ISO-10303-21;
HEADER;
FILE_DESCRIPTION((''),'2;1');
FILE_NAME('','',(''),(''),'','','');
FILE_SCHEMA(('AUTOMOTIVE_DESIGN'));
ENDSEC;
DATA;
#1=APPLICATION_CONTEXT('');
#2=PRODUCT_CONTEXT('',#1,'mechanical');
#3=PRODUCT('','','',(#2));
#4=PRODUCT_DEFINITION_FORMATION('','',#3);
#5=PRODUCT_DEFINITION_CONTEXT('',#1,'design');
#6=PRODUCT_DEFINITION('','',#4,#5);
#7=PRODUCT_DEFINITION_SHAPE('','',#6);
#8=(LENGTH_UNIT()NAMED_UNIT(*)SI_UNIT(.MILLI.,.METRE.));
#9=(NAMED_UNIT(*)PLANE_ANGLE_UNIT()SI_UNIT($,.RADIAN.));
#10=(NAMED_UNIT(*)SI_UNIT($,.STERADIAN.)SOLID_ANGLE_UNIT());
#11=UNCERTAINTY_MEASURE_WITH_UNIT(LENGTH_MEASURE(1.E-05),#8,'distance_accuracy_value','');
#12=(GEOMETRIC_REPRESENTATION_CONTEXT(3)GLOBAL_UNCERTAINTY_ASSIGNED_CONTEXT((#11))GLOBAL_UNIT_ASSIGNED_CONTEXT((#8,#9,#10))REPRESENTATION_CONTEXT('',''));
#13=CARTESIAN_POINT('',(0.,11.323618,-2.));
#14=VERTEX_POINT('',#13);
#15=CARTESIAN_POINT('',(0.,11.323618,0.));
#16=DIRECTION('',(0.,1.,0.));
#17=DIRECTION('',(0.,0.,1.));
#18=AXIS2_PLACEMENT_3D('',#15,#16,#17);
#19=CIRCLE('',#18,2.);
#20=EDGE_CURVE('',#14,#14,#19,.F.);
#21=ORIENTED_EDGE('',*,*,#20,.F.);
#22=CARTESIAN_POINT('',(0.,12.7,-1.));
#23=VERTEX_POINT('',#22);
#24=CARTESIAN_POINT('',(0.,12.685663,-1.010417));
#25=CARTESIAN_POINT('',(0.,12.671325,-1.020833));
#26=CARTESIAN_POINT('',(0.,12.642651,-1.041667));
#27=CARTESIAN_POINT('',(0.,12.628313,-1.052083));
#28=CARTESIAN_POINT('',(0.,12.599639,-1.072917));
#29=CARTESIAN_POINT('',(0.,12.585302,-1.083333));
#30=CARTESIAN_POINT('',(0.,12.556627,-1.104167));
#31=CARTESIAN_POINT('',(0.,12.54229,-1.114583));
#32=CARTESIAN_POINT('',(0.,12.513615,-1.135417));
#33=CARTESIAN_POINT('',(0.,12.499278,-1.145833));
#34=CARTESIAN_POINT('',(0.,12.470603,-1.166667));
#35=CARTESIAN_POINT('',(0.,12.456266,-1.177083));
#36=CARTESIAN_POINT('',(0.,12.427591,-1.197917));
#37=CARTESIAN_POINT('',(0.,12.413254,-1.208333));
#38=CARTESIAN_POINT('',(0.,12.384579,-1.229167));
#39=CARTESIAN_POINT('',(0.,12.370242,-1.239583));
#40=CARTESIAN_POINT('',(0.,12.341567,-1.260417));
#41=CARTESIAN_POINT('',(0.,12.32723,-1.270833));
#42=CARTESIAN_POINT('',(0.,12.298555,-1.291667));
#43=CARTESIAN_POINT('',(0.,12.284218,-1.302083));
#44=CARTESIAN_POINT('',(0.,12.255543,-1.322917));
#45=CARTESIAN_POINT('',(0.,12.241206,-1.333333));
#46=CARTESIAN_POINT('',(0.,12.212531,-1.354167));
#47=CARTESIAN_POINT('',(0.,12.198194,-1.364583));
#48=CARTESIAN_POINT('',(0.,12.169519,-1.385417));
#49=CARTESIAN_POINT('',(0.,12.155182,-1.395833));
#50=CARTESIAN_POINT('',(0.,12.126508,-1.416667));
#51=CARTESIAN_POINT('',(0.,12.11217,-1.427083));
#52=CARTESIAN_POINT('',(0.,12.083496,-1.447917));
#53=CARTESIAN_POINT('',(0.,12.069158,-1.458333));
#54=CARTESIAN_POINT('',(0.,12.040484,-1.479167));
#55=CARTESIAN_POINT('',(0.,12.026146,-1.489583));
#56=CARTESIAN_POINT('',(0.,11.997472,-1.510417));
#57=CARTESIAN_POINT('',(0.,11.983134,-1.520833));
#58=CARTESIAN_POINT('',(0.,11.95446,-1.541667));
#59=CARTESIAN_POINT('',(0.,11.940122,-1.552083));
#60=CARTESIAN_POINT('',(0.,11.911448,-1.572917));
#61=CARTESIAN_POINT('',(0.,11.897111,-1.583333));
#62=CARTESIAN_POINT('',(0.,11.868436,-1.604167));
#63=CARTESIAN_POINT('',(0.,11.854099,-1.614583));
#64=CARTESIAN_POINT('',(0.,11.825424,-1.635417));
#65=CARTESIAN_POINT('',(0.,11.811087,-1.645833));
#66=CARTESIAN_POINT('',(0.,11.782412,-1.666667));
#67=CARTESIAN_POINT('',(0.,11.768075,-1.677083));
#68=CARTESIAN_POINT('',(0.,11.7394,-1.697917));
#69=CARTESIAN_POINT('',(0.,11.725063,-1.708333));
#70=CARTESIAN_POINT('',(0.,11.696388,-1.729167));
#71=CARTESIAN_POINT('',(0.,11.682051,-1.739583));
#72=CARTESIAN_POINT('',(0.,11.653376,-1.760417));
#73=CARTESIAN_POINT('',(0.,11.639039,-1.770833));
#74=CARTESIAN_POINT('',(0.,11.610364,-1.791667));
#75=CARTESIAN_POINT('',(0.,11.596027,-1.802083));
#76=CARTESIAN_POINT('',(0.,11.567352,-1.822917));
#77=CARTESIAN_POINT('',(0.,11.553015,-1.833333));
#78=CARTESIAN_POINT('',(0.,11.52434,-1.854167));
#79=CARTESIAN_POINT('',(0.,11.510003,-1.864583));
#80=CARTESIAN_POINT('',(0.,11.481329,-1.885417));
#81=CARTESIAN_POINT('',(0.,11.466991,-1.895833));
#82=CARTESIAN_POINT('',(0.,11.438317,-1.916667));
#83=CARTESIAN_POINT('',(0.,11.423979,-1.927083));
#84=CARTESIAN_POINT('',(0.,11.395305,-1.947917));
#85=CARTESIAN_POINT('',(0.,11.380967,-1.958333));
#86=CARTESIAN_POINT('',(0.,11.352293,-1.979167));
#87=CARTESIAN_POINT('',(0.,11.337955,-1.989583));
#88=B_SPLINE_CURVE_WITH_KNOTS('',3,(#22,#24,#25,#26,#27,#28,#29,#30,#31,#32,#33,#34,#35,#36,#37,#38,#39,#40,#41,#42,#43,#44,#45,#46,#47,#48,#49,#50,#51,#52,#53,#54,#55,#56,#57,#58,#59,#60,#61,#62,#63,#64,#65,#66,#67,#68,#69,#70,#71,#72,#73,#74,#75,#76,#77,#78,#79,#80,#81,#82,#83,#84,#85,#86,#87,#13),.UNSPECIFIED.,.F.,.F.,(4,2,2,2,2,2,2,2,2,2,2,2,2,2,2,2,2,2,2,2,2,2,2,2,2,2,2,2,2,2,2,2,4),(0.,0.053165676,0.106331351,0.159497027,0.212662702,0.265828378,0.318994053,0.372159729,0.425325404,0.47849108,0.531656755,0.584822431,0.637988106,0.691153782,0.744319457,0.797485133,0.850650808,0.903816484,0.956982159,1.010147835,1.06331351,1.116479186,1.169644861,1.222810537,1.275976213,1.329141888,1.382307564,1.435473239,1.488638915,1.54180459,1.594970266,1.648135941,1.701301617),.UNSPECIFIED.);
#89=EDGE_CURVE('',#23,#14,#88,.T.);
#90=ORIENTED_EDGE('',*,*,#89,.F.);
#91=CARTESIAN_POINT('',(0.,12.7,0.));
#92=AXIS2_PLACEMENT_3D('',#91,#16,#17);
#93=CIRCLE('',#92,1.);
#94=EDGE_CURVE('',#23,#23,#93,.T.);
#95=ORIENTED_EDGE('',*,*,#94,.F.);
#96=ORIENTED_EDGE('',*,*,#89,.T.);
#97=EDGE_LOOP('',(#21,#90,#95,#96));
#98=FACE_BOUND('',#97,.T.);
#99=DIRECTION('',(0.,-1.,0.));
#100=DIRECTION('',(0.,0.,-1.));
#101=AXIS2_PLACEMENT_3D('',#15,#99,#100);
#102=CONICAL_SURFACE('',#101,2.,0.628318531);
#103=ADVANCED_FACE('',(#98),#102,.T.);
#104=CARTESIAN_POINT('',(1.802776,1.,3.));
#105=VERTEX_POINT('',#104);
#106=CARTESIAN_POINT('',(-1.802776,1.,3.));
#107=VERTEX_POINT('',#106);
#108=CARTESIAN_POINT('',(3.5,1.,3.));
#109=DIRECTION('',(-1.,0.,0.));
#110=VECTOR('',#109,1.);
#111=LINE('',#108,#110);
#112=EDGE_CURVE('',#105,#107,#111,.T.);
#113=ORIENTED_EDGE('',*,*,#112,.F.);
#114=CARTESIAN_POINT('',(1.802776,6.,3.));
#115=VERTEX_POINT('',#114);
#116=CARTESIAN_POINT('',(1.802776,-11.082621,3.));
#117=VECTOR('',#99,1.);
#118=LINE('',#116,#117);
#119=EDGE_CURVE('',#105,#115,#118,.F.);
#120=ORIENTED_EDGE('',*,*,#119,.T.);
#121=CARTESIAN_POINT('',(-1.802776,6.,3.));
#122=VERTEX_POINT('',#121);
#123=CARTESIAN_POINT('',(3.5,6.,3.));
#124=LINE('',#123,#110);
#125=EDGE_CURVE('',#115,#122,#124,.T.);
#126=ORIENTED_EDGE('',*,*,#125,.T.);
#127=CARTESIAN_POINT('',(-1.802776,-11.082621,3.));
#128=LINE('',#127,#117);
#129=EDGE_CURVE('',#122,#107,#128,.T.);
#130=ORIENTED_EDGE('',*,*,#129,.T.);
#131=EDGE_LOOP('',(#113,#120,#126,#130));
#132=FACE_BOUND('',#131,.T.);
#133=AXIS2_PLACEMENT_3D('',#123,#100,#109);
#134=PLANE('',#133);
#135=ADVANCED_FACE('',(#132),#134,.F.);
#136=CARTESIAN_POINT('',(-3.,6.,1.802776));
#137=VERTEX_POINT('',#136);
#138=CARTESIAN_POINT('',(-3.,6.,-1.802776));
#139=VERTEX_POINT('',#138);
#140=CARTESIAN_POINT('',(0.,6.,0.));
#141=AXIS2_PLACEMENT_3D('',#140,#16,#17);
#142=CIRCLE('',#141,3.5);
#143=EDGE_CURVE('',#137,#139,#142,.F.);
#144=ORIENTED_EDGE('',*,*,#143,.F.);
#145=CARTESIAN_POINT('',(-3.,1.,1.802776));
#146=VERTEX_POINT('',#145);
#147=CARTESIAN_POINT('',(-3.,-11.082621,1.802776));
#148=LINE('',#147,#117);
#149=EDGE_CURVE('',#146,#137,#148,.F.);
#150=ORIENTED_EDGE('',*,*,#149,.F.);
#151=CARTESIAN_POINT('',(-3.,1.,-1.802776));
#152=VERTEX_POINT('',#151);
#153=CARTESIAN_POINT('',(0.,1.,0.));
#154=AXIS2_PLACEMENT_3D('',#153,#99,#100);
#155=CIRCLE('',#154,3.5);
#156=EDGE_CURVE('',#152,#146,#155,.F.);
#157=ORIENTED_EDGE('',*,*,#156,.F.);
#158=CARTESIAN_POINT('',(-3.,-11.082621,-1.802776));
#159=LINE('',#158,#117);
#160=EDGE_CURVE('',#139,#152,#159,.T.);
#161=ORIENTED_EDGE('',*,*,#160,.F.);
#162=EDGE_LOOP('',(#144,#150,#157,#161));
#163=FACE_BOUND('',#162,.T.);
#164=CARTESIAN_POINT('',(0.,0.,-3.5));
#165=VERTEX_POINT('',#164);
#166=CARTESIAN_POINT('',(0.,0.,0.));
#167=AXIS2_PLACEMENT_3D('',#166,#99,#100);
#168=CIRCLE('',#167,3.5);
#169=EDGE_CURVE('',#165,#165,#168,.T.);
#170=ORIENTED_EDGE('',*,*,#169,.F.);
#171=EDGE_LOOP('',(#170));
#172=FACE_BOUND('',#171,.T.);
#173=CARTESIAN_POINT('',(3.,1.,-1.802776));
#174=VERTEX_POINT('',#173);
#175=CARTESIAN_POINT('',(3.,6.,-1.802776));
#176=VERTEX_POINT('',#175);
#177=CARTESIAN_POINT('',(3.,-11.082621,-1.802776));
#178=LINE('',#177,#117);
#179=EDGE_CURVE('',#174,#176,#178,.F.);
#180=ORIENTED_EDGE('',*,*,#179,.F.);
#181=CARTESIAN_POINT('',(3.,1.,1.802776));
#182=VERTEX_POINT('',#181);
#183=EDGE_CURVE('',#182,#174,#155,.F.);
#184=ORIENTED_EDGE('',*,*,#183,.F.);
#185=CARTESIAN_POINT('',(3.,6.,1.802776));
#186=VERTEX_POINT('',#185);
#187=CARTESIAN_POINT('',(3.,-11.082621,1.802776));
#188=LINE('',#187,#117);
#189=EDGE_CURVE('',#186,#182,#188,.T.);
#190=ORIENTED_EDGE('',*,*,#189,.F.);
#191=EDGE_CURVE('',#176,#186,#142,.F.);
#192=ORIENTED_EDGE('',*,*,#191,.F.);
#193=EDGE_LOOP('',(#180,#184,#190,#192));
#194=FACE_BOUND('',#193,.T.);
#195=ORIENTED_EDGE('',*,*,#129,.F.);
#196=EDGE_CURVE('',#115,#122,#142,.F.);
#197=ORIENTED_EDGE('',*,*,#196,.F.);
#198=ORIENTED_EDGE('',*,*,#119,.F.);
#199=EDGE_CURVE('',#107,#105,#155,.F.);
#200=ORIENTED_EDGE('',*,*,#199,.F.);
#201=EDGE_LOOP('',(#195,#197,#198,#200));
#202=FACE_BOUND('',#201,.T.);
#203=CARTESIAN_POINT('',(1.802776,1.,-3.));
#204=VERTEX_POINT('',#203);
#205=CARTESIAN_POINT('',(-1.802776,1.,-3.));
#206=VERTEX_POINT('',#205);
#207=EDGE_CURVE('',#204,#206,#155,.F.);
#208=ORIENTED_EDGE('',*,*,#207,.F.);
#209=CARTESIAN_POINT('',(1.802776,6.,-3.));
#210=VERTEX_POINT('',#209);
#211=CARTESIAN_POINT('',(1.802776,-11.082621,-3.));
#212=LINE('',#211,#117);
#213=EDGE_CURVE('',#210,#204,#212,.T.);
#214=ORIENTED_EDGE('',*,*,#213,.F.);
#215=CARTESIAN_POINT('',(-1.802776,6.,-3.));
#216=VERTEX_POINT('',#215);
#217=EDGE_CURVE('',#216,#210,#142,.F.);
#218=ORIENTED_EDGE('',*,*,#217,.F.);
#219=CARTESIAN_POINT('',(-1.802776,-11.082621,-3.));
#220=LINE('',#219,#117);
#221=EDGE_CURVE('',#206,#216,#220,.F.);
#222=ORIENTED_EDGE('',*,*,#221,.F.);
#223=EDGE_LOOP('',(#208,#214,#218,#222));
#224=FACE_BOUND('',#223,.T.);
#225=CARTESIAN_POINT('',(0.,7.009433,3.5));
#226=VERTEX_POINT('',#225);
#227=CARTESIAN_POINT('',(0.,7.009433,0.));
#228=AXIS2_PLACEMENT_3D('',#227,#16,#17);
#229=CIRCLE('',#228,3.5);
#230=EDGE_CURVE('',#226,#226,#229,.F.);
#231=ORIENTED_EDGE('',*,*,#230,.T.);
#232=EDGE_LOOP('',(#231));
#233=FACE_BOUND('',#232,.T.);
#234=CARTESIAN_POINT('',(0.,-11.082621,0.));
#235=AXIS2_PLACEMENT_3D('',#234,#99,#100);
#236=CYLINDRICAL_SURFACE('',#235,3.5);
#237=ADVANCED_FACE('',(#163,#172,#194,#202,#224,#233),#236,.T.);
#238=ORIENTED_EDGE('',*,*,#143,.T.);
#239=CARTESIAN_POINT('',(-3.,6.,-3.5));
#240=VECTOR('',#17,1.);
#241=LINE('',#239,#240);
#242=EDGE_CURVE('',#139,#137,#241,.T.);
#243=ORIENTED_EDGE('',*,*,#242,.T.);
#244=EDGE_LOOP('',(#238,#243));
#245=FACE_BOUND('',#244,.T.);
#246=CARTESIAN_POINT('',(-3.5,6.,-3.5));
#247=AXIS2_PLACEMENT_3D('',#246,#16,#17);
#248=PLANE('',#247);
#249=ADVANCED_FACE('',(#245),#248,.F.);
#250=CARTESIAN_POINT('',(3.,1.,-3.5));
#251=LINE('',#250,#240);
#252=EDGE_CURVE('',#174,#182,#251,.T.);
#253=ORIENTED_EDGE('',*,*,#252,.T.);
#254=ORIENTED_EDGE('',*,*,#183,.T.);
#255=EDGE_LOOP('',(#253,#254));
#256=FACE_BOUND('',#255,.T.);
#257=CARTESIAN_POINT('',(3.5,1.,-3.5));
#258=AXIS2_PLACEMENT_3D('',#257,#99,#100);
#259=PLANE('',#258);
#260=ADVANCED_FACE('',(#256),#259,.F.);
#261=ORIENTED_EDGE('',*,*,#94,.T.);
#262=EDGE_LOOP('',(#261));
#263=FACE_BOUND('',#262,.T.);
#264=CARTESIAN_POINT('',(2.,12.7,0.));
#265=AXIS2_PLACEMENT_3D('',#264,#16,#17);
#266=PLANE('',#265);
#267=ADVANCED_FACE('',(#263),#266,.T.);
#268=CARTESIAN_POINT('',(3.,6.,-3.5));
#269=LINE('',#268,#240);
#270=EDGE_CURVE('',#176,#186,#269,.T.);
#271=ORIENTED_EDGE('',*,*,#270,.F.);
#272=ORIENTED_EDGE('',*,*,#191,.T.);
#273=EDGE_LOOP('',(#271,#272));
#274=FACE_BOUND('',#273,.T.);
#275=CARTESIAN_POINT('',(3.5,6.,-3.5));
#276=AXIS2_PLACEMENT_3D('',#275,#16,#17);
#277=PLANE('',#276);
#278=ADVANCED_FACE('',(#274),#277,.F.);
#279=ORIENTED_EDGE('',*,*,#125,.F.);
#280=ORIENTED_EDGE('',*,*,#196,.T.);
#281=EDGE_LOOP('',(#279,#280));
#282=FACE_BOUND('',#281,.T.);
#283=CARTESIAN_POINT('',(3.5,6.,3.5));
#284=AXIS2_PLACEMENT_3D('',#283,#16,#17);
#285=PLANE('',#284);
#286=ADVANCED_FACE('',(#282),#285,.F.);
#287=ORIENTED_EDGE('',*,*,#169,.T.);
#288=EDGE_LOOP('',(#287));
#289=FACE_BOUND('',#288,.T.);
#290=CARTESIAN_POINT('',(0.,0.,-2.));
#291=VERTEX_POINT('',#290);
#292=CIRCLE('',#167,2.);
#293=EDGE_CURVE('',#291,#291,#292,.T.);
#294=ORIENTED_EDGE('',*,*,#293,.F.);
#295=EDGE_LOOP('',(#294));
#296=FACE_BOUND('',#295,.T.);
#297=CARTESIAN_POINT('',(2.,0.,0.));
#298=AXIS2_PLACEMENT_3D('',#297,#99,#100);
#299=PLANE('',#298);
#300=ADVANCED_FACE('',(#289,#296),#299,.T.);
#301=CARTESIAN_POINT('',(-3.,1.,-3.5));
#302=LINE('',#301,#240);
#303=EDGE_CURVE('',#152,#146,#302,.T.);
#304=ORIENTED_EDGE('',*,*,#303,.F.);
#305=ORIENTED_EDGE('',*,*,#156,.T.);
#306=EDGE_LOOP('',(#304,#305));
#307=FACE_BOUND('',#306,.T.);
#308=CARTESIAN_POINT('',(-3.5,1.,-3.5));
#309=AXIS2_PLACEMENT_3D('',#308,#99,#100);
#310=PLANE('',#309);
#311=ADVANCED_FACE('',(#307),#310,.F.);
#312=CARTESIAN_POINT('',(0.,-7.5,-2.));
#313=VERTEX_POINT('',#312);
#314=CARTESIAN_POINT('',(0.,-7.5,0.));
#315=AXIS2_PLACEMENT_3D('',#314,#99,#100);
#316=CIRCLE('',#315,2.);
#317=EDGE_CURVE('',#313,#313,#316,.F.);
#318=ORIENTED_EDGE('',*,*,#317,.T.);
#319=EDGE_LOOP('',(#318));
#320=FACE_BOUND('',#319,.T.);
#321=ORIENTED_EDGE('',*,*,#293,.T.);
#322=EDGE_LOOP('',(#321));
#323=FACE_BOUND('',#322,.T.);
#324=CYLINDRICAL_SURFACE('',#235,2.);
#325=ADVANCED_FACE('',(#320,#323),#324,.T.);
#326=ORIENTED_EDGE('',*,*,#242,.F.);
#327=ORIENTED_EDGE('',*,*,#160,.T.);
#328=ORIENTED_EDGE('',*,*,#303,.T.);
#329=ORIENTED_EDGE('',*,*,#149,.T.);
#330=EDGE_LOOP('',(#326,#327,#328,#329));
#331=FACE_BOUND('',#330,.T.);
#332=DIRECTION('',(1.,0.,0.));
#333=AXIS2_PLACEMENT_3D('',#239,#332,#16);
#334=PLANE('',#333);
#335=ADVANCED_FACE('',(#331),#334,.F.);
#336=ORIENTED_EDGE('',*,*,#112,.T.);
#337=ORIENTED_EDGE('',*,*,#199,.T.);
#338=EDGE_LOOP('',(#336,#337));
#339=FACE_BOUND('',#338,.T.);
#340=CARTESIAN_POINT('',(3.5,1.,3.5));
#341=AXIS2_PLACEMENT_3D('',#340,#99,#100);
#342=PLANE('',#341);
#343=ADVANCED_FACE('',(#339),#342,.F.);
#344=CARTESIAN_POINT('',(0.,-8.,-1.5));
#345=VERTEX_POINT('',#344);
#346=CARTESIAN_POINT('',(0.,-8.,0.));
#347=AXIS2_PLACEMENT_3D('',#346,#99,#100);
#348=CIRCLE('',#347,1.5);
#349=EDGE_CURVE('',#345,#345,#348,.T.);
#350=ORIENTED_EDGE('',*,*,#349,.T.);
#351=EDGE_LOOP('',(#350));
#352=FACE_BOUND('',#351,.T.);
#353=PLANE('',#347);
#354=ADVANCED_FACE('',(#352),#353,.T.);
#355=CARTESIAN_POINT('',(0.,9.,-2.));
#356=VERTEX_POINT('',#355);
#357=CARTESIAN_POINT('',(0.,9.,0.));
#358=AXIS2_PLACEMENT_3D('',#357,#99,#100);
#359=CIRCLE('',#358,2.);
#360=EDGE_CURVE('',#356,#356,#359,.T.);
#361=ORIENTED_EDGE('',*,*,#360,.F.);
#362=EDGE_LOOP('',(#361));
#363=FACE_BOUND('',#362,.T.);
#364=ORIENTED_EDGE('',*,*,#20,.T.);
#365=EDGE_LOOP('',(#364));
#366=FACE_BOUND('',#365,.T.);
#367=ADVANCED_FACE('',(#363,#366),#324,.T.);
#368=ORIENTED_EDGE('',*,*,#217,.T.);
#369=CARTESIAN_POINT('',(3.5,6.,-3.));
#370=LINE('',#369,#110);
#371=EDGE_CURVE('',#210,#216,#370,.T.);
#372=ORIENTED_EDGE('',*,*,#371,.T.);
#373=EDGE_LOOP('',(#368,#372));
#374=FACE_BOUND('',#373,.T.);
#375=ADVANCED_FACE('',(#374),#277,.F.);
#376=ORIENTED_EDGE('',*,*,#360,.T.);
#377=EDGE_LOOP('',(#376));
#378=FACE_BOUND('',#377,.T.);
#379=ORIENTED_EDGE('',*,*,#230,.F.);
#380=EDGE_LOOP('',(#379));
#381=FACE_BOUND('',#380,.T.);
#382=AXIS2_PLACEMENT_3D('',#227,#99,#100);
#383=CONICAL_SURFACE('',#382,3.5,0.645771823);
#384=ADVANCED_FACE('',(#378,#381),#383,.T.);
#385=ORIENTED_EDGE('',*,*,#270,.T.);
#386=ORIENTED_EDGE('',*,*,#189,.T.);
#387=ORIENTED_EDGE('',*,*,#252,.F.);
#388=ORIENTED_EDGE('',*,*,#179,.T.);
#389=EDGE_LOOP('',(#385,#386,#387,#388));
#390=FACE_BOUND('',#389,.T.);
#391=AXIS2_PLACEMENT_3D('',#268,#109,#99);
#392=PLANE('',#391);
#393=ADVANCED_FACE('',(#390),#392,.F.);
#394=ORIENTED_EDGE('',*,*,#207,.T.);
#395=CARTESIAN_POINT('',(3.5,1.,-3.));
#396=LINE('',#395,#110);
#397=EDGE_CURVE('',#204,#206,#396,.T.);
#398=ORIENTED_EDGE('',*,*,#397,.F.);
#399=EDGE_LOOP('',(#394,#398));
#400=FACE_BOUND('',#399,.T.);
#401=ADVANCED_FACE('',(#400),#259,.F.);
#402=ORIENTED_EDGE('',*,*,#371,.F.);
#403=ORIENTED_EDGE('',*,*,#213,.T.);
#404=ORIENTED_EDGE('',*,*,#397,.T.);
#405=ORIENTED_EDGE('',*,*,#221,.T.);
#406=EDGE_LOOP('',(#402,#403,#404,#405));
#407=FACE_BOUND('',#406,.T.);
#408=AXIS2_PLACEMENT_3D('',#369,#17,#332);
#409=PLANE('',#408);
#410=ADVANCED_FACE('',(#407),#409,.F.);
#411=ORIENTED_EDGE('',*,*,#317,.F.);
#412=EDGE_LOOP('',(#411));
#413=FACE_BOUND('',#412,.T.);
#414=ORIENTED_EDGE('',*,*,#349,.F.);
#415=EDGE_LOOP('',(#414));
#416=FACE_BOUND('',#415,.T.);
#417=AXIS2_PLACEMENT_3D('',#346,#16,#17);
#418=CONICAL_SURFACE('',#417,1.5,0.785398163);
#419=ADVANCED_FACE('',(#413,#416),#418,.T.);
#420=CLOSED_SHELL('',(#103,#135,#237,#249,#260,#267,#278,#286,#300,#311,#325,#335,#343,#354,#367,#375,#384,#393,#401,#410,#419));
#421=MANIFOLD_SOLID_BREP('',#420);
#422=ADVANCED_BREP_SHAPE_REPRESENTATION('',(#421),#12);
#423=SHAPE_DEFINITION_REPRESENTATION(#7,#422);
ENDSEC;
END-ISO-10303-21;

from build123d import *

# Parameters (mm, degrees)
SKETCH2_W          = 0.5
SKETCH2_H          = 5
CUT_EXTRUDE1_DEPTH = 14.630480549
CIRPATTERN1_COUNT  = 2
CIRPATTERN1_ANGLE  = 90
CHAMFER1_SIZE2     = 1.5
CHAMFER1_SIZE      = 1.990567232
CHAMFER2_SIZE      = 1
CHAMFER2_SIZE2     = 1.37638192
CHAMFER3_SIZE      = 0.5


with BuildPart() as part:
    # Sketch1 → Revolve1 (revolve)
    with BuildSketch(Plane.XY, mode=Mode.PRIVATE) as revolve1_sk:
        Polygon((0, -8), (2, -8), (2, 0), (3.5, 0), (3.5, 9), (2, 9), (2, 12.7), (0, 12.7), align=None)
    revolve(revolve1_sk.sketch.rotate(Axis((0, -11.082621068, 0), (0, 1, 0)), 90), axis=Axis((0, -11.082621068, 0), (0, 1, 0)))

    # Sketch2 → Cut-Extrude1 (cut, symmetric)
    with BuildSketch(Plane.XY):
        with Locations((-3.25, 3.5)):
            Rectangle(SKETCH2_W, SKETCH2_H)
        with Locations((3.25, 3.5)):
            Rectangle(SKETCH2_W, SKETCH2_H)
    cut_extrude1 = extrude(amount=CUT_EXTRUDE1_DEPTH, both=True, mode=Mode.SUBTRACT)

    # CirPattern1: Cut-Extrude1 ×2 about axis
    cirpattern1_axis = Axis((0, -11.082621068, 0), (0, -1, 0))
    for i in range(1, CIRPATTERN1_COUNT):
        add(cut_extrude1.rotate(cirpattern1_axis, i * CIRPATTERN1_ANGLE / (CIRPATTERN1_COUNT - 1)), mode=Mode.SUBTRACT)

    # Chamfer1
    chamfer1_edges = [part.edges().sort_by_distance(p)[0] for p in [
        (0, 9, 3.5),
    ]]
    chamfer1_side = [part.faces().sort_by_distance(p)[0] for p in [
        (0, 8.97, 3.5),
    ]]
    chamfer(chamfer1_edges, length=CHAMFER1_SIZE - 0.0001, length2=CHAMFER1_SIZE2 - 0.0001, reference=chamfer1_side[0])  # a hair under: the kernel refuses the full size

    # Chamfer2
    chamfer2_edges = [part.edges().sort_by_distance(p)[0] for p in [
        (0, 12.7, 2),
    ]]
    chamfer2_side = [part.faces().sort_by_distance(p)[0] for p in [
        (0, 12.7, 0),
    ]]
    chamfer(chamfer2_edges, length=CHAMFER2_SIZE, length2=CHAMFER2_SIZE2, reference=chamfer2_side[0])

    # Chamfer3
    chamfer3_edges = [part.edges().sort_by_distance(p)[0] for p in [
        (0, -8, 2),
    ]]
    chamfer(chamfer3_edges, length=CHAMFER3_SIZE)


solid = part.part
